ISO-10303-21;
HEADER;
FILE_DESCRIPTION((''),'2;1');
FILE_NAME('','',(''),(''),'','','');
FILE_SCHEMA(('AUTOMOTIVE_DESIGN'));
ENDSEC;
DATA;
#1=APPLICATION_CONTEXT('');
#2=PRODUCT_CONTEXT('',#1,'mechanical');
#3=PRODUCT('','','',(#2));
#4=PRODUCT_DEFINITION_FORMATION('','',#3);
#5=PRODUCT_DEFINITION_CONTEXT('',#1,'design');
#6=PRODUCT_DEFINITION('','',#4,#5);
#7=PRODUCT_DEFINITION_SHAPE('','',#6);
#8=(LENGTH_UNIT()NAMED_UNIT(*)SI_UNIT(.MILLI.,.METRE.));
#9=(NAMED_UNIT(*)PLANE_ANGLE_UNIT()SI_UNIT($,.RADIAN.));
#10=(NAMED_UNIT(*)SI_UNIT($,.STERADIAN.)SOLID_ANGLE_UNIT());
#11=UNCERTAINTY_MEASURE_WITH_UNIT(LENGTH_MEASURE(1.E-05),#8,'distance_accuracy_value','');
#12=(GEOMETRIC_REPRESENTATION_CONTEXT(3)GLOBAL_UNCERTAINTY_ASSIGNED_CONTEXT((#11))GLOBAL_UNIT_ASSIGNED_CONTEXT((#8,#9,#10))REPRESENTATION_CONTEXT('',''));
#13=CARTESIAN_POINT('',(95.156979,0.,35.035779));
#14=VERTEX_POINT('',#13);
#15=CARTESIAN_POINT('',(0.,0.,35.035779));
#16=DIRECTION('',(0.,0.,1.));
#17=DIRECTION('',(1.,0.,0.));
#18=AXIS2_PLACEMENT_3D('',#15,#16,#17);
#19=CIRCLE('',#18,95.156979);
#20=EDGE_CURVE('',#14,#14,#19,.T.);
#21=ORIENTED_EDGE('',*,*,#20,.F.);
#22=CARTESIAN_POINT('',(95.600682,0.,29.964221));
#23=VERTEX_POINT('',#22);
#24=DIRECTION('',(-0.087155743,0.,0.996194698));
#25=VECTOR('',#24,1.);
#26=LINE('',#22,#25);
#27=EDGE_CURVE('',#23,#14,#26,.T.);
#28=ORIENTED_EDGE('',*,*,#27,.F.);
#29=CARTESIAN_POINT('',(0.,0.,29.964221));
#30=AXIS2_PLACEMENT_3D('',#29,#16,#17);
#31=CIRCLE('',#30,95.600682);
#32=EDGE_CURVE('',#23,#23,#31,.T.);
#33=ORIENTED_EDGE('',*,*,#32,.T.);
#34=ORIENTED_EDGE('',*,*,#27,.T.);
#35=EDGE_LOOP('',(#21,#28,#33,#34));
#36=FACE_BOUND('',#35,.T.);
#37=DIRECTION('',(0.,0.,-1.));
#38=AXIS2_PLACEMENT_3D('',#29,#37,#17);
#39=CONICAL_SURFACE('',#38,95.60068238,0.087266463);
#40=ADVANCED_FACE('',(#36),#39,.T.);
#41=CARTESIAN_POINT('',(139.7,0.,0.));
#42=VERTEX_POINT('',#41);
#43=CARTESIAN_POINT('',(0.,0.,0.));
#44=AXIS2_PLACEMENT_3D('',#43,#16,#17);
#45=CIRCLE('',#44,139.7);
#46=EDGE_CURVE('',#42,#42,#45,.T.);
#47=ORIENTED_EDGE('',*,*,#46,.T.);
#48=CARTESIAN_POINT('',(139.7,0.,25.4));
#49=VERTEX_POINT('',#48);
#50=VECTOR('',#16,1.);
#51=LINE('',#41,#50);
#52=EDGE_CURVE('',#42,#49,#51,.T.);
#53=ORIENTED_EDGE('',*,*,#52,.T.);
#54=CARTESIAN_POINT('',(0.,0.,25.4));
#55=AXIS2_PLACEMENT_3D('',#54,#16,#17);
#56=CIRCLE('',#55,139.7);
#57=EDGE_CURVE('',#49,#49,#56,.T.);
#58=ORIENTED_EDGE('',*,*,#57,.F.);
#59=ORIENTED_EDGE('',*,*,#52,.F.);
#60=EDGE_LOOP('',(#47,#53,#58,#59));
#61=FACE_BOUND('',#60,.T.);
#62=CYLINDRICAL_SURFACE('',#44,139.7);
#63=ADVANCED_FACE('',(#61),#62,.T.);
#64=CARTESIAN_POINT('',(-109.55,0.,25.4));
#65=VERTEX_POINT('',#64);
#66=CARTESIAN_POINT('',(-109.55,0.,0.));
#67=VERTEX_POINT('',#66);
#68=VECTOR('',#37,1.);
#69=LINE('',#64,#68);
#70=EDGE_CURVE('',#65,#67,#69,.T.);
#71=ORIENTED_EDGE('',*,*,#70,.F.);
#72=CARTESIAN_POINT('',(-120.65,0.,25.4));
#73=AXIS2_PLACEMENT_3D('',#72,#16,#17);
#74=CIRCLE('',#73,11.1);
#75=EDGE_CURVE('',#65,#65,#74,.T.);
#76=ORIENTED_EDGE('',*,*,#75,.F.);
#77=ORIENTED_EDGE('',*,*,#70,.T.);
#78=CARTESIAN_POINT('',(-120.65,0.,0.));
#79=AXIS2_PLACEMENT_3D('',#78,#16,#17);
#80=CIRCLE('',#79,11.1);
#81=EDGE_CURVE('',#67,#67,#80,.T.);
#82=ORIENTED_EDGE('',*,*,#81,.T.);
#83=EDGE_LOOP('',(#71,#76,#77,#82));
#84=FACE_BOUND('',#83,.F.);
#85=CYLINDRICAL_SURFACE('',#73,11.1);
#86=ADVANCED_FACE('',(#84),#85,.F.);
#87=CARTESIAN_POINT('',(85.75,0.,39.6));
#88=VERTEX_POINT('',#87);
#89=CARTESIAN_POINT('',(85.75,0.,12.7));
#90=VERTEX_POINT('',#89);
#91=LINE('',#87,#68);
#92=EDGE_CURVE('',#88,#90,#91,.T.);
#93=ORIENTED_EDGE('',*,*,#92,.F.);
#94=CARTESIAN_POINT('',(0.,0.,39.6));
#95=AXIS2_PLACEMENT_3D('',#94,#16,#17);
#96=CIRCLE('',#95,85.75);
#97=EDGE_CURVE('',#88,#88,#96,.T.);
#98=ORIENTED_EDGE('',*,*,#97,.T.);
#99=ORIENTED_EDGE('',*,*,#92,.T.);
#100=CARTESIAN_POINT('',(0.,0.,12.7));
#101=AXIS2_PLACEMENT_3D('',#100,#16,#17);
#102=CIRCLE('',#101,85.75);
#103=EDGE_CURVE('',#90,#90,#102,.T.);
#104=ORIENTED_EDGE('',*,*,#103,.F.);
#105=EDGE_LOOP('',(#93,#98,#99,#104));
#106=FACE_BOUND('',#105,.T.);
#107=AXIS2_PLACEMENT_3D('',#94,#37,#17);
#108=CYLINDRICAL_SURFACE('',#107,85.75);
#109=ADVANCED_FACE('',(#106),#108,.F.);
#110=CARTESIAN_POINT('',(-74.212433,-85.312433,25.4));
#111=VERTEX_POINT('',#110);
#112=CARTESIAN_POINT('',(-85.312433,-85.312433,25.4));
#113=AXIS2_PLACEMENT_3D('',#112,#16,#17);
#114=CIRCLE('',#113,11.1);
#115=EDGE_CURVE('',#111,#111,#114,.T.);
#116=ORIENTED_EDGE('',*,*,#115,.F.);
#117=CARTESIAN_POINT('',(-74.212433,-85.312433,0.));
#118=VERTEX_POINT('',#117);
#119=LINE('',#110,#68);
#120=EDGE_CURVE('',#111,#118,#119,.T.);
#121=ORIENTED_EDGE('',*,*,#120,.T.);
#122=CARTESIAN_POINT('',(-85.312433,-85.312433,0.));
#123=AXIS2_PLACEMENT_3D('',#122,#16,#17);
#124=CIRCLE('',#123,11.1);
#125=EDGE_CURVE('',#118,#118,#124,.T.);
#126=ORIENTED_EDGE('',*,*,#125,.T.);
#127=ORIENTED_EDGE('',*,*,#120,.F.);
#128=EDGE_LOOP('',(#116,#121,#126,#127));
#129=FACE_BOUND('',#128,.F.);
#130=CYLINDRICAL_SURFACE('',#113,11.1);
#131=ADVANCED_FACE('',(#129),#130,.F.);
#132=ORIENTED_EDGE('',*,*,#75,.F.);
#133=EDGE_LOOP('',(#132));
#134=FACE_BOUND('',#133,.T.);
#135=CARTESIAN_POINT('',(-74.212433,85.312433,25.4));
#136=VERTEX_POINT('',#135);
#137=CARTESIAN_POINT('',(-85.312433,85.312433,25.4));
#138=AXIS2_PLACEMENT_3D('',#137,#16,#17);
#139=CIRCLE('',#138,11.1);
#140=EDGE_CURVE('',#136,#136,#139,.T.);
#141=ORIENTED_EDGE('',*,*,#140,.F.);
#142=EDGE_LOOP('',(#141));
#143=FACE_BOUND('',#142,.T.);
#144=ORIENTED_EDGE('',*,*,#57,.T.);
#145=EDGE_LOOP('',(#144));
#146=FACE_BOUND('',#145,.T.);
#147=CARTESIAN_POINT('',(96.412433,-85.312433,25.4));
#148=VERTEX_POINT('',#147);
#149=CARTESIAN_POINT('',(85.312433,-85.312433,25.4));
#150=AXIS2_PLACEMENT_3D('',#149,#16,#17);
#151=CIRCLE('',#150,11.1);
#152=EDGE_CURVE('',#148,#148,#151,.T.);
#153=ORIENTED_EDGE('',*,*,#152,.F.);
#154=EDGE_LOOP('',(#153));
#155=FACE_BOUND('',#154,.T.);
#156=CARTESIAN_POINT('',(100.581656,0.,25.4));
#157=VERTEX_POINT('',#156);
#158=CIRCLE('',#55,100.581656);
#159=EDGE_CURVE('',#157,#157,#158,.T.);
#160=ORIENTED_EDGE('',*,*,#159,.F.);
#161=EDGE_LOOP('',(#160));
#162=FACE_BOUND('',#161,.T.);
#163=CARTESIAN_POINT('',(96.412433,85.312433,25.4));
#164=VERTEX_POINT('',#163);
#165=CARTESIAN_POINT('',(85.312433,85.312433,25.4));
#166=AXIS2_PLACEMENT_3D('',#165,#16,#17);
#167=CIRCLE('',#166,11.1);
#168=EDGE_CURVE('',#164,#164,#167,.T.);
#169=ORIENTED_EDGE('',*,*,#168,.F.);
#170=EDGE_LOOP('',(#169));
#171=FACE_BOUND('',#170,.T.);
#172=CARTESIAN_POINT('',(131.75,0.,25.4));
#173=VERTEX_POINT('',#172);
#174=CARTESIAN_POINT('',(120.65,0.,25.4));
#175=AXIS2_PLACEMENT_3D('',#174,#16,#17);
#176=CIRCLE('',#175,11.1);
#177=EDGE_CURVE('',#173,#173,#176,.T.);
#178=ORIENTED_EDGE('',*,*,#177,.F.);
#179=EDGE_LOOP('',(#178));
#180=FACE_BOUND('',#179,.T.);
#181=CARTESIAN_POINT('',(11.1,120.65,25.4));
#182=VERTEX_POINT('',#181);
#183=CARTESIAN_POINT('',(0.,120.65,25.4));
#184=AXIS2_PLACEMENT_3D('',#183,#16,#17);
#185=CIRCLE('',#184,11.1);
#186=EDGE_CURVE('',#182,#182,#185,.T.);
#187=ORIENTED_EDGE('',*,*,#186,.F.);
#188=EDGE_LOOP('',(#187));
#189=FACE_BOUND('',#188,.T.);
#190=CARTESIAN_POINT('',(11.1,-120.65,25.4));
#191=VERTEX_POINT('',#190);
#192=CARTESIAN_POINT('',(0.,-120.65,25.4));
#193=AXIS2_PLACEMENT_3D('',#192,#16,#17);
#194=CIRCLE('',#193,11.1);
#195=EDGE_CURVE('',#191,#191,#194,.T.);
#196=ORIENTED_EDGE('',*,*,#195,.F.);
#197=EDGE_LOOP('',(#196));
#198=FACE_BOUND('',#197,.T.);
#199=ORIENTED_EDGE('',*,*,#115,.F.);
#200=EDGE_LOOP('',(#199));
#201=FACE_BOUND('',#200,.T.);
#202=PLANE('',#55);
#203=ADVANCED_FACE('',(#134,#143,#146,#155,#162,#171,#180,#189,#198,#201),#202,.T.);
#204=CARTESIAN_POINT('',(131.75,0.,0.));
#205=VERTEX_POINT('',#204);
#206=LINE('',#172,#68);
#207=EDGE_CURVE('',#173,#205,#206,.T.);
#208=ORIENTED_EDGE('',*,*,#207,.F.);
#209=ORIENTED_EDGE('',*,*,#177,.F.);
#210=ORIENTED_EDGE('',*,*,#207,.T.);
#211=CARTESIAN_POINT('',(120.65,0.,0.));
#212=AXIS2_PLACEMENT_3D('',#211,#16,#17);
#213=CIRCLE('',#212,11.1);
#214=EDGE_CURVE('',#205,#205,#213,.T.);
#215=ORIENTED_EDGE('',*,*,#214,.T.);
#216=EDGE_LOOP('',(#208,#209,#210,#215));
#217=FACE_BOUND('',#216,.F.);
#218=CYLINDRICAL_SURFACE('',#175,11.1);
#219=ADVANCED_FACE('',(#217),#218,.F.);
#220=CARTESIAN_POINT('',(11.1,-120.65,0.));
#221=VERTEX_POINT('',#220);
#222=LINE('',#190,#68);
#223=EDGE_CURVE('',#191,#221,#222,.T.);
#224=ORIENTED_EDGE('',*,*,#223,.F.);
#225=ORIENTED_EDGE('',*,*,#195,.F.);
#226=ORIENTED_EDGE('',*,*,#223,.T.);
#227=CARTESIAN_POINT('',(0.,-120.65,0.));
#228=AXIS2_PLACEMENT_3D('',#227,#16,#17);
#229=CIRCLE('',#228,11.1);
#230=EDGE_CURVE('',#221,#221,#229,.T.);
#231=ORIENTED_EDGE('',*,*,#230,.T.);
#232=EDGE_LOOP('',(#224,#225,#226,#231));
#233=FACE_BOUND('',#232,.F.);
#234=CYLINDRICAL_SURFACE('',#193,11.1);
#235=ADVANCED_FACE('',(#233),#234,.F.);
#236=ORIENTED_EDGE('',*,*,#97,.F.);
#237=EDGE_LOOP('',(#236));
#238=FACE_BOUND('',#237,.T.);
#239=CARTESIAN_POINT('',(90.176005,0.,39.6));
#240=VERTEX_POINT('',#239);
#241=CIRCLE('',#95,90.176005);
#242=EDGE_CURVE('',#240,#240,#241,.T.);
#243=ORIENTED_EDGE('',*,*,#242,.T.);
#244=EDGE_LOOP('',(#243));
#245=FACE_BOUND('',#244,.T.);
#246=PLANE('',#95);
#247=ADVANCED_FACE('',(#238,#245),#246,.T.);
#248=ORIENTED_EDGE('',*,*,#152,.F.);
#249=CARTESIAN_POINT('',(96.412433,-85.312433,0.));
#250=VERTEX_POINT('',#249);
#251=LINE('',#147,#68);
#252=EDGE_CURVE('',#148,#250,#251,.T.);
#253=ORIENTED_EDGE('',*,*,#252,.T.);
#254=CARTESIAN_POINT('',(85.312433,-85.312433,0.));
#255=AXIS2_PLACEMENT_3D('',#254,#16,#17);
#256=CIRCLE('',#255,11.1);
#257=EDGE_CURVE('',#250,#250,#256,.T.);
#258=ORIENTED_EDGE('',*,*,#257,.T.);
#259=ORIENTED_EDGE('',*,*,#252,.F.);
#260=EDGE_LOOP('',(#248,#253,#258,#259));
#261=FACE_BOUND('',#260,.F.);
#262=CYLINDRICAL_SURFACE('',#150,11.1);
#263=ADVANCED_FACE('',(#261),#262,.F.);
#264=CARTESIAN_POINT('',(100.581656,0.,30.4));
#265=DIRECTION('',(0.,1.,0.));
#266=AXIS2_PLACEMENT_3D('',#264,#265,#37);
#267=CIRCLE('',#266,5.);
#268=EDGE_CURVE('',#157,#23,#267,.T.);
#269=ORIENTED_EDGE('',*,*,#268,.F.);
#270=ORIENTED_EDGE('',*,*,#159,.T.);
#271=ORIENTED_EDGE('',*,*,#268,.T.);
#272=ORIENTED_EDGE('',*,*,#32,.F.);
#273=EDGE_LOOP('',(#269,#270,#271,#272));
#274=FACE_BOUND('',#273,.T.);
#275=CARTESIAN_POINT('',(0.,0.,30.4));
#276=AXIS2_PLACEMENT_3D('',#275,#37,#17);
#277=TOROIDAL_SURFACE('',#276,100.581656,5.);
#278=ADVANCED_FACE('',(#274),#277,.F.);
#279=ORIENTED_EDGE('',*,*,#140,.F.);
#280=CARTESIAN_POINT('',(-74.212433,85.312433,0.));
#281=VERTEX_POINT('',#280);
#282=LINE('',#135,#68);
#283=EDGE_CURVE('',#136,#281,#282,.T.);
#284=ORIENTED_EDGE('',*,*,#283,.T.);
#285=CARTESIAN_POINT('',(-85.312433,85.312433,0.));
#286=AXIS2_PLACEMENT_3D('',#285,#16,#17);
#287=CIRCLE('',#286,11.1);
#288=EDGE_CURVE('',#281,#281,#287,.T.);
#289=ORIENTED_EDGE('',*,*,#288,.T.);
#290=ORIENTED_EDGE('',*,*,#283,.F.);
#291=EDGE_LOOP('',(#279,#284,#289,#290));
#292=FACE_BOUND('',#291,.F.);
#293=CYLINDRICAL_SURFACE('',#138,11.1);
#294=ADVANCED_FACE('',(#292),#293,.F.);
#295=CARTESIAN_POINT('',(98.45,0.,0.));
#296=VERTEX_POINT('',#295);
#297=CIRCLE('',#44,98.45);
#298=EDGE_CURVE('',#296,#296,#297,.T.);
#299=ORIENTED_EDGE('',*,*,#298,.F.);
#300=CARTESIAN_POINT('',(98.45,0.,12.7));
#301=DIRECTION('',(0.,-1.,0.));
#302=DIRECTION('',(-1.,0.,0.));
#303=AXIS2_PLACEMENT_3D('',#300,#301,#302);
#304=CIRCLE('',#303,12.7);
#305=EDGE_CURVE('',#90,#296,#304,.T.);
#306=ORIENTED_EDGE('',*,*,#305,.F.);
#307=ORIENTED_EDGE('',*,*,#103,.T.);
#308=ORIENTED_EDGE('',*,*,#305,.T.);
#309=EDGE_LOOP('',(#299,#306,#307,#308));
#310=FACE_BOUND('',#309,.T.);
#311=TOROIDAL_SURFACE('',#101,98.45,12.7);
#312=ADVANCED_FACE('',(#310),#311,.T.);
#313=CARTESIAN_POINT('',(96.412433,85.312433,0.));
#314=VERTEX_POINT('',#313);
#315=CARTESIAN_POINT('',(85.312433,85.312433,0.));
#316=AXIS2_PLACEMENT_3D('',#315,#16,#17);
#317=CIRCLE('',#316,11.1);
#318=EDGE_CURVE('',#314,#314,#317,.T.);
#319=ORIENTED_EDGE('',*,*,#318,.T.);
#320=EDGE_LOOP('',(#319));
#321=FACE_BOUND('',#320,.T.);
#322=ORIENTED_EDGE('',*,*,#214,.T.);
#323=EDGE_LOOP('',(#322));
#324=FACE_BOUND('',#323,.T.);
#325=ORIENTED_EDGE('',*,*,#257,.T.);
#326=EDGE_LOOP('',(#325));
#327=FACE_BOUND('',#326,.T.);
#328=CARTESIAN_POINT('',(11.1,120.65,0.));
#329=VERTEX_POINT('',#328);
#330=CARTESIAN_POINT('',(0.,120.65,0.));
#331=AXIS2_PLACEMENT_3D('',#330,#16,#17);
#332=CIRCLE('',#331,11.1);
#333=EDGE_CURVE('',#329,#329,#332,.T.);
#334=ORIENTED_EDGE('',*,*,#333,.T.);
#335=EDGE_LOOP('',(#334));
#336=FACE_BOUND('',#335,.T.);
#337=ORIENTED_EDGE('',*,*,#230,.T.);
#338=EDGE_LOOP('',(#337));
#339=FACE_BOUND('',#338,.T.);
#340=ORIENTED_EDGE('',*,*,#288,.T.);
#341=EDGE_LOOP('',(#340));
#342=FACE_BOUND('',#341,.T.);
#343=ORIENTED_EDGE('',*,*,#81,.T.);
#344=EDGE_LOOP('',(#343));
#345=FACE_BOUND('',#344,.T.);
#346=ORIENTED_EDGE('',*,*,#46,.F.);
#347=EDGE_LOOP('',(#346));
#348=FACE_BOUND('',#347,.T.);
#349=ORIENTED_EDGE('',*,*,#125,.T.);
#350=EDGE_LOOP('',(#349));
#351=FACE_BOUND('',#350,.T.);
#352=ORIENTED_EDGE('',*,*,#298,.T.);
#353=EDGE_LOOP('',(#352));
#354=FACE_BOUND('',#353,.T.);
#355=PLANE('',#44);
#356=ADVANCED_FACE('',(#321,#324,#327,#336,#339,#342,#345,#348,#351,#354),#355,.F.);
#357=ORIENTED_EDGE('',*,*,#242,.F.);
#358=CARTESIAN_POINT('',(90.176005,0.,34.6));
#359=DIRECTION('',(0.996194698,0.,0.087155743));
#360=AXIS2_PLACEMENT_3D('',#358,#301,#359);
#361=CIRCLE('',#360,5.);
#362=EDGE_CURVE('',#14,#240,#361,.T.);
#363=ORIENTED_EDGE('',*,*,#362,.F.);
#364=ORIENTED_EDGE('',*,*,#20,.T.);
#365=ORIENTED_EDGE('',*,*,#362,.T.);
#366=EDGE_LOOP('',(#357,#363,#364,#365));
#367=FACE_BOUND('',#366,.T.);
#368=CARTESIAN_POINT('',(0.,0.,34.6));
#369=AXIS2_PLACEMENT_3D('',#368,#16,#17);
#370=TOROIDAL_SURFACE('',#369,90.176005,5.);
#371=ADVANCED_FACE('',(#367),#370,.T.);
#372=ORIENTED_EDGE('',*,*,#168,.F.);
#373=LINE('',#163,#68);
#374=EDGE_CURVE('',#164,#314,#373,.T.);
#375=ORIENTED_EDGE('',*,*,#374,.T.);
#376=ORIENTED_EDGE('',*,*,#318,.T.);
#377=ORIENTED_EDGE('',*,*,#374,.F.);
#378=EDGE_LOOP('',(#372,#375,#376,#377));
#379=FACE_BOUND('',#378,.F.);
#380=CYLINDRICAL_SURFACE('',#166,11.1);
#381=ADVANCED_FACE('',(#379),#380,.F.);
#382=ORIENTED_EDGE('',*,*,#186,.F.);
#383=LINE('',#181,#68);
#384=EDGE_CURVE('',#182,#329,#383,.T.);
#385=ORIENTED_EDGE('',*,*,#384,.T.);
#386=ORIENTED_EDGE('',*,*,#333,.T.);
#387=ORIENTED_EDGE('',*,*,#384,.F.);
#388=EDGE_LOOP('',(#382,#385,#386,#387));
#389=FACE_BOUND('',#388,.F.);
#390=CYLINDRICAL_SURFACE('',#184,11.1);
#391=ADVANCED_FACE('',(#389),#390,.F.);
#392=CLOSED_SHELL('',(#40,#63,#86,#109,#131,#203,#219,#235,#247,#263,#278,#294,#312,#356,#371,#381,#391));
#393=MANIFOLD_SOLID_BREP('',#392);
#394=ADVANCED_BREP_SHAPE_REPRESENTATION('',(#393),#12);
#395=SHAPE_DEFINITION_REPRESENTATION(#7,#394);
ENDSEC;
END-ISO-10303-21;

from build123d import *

# Parameters (mm, degrees)
F2_R     = 11.1
F3_DEPTH = 25.401


# Not quite as in the source:
# - a feature names something its author has since deleted; it is built from what else it names


with BuildPart() as f1:
    # F0 (on Front) → F1 (revolve)
    with BuildSketch(Plane.XZ):
        with BuildLine():
            ThreePointArc((85.75, 12.7), (89.4697438789, 3.7197438789), (98.45, 0))
            Line((98.45, 0), (139.7, 0))
            Line((139.7, 0), (139.7, 25.4))
            Line((139.7, 25.4), (100.5816558701, 25.4))
            ThreePointArc((100.5816558701, 25.4), (97.203704832, 26.7136133159), (95.6006823796, 29.9642212863))
            Line((95.6006823796, 29.9642212863), (95.1569785983, 35.0357787137))
            ThreePointArc((95.1569785983, 35.0357787137), (93.5539561459, 38.2863866841), (90.1760051078, 39.6))
            Line((90.1760051078, 39.6), (85.75, 39.6))
            Line((85.75, 39.6), (85.75, 12.7))
        make_face()
    revolve(axis=Axis((0, 0, 19.8), (0, 0, 1)))

    # F2 (on face) → F3 (cut, through all)
    with BuildSketch(Plane.XY.offset(25.4)):
        with Locations((0, 120.65)):
            Circle(F2_R)
        with Locations((-85.3124331502, 85.3124331502)):
            Circle(F2_R)
        with Locations((-120.65, 0)):
            Circle(F2_R)
        with Locations((-85.3124331502, -85.3124331502)):
            Circle(F2_R)
        with Locations((0, -120.65)):
            Circle(F2_R)
        with Locations((85.3124331502, -85.3124331502)):
            Circle(F2_R)
        with Locations((120.65, 0)):
            Circle(F2_R)
        with Locations((85.3124331502, 85.3124331502)):
            Circle(F2_R)
    extrude(amount=-F3_DEPTH, mode=Mode.SUBTRACT)


solid = f1.part
